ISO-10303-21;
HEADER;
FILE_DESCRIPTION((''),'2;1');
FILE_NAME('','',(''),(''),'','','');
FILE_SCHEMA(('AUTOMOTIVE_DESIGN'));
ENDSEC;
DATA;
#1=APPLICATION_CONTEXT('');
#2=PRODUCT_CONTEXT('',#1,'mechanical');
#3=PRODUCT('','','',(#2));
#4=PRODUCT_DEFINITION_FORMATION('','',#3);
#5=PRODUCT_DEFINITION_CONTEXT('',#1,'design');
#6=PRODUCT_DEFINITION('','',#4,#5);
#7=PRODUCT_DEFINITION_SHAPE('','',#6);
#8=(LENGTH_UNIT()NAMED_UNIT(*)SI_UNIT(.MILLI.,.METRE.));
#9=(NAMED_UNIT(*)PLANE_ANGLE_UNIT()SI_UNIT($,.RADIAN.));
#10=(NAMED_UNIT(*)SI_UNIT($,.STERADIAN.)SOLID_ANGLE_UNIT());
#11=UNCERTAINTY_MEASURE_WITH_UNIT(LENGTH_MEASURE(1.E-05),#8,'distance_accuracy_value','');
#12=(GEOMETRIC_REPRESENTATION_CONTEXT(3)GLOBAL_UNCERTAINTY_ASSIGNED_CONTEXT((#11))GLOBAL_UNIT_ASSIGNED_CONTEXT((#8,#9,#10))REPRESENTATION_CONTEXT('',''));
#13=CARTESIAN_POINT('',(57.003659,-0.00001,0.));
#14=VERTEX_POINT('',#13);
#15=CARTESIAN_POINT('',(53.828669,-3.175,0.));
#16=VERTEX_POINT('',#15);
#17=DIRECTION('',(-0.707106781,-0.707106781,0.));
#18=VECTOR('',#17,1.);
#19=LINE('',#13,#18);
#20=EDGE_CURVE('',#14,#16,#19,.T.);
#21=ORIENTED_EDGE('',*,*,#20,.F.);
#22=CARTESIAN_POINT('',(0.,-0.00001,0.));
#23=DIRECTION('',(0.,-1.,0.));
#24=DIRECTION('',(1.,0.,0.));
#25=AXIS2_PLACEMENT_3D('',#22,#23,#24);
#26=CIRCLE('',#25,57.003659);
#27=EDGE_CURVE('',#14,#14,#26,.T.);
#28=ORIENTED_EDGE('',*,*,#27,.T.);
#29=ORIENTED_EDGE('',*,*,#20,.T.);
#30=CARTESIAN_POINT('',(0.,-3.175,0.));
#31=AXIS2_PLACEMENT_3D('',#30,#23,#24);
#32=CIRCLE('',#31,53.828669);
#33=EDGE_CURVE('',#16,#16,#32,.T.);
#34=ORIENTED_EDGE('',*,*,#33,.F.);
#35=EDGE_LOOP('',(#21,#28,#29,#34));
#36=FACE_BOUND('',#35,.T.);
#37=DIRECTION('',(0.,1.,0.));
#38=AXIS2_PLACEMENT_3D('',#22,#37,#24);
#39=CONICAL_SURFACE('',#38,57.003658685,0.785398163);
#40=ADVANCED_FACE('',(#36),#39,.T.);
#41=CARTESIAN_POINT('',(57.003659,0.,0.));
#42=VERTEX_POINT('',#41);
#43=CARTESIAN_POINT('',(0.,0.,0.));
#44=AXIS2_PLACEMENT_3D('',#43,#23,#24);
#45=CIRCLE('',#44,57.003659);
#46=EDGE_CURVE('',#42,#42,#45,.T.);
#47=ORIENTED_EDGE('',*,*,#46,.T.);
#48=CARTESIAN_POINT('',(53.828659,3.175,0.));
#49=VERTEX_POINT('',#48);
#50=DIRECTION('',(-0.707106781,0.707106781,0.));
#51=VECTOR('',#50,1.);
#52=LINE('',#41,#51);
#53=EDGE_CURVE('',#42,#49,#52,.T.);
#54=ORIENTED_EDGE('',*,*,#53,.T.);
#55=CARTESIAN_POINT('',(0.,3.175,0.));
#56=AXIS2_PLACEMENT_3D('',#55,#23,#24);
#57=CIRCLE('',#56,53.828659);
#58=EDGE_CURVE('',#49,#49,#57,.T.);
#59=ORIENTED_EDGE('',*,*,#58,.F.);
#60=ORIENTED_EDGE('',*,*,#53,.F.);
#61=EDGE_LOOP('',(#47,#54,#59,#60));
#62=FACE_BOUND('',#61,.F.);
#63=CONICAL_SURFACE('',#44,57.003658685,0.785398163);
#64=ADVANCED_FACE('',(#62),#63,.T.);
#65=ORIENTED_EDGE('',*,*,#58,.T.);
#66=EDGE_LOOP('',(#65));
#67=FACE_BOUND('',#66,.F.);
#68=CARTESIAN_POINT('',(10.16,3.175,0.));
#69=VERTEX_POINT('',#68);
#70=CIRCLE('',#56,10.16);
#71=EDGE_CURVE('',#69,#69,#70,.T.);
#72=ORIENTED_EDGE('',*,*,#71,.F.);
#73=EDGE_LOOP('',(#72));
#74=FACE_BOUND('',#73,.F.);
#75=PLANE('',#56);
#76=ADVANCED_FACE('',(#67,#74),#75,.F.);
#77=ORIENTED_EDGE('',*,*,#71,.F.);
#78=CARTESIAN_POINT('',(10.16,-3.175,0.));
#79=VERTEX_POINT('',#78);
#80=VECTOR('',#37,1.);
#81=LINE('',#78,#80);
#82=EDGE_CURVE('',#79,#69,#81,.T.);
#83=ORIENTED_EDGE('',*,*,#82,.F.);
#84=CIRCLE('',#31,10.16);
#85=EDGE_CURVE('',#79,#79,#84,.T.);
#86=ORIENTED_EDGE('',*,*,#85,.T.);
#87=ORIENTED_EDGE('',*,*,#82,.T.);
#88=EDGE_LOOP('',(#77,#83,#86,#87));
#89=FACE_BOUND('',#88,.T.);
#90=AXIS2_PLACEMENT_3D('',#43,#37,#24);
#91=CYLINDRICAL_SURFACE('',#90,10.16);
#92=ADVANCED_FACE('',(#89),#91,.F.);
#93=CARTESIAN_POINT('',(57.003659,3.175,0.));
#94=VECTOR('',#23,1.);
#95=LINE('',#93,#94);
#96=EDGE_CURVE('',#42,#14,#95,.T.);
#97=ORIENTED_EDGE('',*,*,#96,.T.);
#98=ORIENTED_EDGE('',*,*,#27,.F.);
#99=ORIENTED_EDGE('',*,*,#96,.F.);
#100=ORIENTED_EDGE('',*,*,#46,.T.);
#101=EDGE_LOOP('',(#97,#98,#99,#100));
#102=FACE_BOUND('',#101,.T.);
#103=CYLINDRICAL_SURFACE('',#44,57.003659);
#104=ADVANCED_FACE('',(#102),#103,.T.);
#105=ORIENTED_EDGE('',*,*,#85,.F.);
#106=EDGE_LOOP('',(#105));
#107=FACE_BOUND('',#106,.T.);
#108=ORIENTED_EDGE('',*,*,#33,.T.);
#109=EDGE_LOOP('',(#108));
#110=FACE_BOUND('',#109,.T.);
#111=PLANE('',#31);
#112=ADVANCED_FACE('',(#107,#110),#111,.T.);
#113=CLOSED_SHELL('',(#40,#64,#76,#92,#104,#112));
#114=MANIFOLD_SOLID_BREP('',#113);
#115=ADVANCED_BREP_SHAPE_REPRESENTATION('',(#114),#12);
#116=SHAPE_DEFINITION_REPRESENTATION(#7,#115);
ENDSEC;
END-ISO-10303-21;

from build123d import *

# Parameters (mm, degrees)
F0_R     = 57.0036586855
F0_R_2   = 10.16
F1_DEPTH = 3.175
F2_SIZE  = 3.175
F3_SIZE  = 3.17499


# Not quite as in the source:
# - a fillet or chamfer is up to 0.001 mm smaller than in the source, because OpenCascade refuses the exact size


with BuildPart() as f1:
    # F0 (on Front) → F1 (new body, symmetric)
    with BuildSketch(Plane.XZ):
        Circle(F0_R)
        Circle(F0_R_2, mode=Mode.SUBTRACT)
    extrude(amount=F1_DEPTH, both=True)

    # F2
    f2_edges = [f1.edges().sort_by_distance(p)[0] for p in [
        (-57.003659, 3.175, 0),
    ]]
    chamfer(f2_edges, length=F2_SIZE)

    # F3 (size 3.175 in the source; OpenCascade refuses exactly that, so slightly less here)
    f3_edges = [f1.edges().sort_by_distance(p)[0] for p in [
        (-57.003659, -3.175, 0),
    ]]
    chamfer(f3_edges, length=F3_SIZE)


solid = f1.part
